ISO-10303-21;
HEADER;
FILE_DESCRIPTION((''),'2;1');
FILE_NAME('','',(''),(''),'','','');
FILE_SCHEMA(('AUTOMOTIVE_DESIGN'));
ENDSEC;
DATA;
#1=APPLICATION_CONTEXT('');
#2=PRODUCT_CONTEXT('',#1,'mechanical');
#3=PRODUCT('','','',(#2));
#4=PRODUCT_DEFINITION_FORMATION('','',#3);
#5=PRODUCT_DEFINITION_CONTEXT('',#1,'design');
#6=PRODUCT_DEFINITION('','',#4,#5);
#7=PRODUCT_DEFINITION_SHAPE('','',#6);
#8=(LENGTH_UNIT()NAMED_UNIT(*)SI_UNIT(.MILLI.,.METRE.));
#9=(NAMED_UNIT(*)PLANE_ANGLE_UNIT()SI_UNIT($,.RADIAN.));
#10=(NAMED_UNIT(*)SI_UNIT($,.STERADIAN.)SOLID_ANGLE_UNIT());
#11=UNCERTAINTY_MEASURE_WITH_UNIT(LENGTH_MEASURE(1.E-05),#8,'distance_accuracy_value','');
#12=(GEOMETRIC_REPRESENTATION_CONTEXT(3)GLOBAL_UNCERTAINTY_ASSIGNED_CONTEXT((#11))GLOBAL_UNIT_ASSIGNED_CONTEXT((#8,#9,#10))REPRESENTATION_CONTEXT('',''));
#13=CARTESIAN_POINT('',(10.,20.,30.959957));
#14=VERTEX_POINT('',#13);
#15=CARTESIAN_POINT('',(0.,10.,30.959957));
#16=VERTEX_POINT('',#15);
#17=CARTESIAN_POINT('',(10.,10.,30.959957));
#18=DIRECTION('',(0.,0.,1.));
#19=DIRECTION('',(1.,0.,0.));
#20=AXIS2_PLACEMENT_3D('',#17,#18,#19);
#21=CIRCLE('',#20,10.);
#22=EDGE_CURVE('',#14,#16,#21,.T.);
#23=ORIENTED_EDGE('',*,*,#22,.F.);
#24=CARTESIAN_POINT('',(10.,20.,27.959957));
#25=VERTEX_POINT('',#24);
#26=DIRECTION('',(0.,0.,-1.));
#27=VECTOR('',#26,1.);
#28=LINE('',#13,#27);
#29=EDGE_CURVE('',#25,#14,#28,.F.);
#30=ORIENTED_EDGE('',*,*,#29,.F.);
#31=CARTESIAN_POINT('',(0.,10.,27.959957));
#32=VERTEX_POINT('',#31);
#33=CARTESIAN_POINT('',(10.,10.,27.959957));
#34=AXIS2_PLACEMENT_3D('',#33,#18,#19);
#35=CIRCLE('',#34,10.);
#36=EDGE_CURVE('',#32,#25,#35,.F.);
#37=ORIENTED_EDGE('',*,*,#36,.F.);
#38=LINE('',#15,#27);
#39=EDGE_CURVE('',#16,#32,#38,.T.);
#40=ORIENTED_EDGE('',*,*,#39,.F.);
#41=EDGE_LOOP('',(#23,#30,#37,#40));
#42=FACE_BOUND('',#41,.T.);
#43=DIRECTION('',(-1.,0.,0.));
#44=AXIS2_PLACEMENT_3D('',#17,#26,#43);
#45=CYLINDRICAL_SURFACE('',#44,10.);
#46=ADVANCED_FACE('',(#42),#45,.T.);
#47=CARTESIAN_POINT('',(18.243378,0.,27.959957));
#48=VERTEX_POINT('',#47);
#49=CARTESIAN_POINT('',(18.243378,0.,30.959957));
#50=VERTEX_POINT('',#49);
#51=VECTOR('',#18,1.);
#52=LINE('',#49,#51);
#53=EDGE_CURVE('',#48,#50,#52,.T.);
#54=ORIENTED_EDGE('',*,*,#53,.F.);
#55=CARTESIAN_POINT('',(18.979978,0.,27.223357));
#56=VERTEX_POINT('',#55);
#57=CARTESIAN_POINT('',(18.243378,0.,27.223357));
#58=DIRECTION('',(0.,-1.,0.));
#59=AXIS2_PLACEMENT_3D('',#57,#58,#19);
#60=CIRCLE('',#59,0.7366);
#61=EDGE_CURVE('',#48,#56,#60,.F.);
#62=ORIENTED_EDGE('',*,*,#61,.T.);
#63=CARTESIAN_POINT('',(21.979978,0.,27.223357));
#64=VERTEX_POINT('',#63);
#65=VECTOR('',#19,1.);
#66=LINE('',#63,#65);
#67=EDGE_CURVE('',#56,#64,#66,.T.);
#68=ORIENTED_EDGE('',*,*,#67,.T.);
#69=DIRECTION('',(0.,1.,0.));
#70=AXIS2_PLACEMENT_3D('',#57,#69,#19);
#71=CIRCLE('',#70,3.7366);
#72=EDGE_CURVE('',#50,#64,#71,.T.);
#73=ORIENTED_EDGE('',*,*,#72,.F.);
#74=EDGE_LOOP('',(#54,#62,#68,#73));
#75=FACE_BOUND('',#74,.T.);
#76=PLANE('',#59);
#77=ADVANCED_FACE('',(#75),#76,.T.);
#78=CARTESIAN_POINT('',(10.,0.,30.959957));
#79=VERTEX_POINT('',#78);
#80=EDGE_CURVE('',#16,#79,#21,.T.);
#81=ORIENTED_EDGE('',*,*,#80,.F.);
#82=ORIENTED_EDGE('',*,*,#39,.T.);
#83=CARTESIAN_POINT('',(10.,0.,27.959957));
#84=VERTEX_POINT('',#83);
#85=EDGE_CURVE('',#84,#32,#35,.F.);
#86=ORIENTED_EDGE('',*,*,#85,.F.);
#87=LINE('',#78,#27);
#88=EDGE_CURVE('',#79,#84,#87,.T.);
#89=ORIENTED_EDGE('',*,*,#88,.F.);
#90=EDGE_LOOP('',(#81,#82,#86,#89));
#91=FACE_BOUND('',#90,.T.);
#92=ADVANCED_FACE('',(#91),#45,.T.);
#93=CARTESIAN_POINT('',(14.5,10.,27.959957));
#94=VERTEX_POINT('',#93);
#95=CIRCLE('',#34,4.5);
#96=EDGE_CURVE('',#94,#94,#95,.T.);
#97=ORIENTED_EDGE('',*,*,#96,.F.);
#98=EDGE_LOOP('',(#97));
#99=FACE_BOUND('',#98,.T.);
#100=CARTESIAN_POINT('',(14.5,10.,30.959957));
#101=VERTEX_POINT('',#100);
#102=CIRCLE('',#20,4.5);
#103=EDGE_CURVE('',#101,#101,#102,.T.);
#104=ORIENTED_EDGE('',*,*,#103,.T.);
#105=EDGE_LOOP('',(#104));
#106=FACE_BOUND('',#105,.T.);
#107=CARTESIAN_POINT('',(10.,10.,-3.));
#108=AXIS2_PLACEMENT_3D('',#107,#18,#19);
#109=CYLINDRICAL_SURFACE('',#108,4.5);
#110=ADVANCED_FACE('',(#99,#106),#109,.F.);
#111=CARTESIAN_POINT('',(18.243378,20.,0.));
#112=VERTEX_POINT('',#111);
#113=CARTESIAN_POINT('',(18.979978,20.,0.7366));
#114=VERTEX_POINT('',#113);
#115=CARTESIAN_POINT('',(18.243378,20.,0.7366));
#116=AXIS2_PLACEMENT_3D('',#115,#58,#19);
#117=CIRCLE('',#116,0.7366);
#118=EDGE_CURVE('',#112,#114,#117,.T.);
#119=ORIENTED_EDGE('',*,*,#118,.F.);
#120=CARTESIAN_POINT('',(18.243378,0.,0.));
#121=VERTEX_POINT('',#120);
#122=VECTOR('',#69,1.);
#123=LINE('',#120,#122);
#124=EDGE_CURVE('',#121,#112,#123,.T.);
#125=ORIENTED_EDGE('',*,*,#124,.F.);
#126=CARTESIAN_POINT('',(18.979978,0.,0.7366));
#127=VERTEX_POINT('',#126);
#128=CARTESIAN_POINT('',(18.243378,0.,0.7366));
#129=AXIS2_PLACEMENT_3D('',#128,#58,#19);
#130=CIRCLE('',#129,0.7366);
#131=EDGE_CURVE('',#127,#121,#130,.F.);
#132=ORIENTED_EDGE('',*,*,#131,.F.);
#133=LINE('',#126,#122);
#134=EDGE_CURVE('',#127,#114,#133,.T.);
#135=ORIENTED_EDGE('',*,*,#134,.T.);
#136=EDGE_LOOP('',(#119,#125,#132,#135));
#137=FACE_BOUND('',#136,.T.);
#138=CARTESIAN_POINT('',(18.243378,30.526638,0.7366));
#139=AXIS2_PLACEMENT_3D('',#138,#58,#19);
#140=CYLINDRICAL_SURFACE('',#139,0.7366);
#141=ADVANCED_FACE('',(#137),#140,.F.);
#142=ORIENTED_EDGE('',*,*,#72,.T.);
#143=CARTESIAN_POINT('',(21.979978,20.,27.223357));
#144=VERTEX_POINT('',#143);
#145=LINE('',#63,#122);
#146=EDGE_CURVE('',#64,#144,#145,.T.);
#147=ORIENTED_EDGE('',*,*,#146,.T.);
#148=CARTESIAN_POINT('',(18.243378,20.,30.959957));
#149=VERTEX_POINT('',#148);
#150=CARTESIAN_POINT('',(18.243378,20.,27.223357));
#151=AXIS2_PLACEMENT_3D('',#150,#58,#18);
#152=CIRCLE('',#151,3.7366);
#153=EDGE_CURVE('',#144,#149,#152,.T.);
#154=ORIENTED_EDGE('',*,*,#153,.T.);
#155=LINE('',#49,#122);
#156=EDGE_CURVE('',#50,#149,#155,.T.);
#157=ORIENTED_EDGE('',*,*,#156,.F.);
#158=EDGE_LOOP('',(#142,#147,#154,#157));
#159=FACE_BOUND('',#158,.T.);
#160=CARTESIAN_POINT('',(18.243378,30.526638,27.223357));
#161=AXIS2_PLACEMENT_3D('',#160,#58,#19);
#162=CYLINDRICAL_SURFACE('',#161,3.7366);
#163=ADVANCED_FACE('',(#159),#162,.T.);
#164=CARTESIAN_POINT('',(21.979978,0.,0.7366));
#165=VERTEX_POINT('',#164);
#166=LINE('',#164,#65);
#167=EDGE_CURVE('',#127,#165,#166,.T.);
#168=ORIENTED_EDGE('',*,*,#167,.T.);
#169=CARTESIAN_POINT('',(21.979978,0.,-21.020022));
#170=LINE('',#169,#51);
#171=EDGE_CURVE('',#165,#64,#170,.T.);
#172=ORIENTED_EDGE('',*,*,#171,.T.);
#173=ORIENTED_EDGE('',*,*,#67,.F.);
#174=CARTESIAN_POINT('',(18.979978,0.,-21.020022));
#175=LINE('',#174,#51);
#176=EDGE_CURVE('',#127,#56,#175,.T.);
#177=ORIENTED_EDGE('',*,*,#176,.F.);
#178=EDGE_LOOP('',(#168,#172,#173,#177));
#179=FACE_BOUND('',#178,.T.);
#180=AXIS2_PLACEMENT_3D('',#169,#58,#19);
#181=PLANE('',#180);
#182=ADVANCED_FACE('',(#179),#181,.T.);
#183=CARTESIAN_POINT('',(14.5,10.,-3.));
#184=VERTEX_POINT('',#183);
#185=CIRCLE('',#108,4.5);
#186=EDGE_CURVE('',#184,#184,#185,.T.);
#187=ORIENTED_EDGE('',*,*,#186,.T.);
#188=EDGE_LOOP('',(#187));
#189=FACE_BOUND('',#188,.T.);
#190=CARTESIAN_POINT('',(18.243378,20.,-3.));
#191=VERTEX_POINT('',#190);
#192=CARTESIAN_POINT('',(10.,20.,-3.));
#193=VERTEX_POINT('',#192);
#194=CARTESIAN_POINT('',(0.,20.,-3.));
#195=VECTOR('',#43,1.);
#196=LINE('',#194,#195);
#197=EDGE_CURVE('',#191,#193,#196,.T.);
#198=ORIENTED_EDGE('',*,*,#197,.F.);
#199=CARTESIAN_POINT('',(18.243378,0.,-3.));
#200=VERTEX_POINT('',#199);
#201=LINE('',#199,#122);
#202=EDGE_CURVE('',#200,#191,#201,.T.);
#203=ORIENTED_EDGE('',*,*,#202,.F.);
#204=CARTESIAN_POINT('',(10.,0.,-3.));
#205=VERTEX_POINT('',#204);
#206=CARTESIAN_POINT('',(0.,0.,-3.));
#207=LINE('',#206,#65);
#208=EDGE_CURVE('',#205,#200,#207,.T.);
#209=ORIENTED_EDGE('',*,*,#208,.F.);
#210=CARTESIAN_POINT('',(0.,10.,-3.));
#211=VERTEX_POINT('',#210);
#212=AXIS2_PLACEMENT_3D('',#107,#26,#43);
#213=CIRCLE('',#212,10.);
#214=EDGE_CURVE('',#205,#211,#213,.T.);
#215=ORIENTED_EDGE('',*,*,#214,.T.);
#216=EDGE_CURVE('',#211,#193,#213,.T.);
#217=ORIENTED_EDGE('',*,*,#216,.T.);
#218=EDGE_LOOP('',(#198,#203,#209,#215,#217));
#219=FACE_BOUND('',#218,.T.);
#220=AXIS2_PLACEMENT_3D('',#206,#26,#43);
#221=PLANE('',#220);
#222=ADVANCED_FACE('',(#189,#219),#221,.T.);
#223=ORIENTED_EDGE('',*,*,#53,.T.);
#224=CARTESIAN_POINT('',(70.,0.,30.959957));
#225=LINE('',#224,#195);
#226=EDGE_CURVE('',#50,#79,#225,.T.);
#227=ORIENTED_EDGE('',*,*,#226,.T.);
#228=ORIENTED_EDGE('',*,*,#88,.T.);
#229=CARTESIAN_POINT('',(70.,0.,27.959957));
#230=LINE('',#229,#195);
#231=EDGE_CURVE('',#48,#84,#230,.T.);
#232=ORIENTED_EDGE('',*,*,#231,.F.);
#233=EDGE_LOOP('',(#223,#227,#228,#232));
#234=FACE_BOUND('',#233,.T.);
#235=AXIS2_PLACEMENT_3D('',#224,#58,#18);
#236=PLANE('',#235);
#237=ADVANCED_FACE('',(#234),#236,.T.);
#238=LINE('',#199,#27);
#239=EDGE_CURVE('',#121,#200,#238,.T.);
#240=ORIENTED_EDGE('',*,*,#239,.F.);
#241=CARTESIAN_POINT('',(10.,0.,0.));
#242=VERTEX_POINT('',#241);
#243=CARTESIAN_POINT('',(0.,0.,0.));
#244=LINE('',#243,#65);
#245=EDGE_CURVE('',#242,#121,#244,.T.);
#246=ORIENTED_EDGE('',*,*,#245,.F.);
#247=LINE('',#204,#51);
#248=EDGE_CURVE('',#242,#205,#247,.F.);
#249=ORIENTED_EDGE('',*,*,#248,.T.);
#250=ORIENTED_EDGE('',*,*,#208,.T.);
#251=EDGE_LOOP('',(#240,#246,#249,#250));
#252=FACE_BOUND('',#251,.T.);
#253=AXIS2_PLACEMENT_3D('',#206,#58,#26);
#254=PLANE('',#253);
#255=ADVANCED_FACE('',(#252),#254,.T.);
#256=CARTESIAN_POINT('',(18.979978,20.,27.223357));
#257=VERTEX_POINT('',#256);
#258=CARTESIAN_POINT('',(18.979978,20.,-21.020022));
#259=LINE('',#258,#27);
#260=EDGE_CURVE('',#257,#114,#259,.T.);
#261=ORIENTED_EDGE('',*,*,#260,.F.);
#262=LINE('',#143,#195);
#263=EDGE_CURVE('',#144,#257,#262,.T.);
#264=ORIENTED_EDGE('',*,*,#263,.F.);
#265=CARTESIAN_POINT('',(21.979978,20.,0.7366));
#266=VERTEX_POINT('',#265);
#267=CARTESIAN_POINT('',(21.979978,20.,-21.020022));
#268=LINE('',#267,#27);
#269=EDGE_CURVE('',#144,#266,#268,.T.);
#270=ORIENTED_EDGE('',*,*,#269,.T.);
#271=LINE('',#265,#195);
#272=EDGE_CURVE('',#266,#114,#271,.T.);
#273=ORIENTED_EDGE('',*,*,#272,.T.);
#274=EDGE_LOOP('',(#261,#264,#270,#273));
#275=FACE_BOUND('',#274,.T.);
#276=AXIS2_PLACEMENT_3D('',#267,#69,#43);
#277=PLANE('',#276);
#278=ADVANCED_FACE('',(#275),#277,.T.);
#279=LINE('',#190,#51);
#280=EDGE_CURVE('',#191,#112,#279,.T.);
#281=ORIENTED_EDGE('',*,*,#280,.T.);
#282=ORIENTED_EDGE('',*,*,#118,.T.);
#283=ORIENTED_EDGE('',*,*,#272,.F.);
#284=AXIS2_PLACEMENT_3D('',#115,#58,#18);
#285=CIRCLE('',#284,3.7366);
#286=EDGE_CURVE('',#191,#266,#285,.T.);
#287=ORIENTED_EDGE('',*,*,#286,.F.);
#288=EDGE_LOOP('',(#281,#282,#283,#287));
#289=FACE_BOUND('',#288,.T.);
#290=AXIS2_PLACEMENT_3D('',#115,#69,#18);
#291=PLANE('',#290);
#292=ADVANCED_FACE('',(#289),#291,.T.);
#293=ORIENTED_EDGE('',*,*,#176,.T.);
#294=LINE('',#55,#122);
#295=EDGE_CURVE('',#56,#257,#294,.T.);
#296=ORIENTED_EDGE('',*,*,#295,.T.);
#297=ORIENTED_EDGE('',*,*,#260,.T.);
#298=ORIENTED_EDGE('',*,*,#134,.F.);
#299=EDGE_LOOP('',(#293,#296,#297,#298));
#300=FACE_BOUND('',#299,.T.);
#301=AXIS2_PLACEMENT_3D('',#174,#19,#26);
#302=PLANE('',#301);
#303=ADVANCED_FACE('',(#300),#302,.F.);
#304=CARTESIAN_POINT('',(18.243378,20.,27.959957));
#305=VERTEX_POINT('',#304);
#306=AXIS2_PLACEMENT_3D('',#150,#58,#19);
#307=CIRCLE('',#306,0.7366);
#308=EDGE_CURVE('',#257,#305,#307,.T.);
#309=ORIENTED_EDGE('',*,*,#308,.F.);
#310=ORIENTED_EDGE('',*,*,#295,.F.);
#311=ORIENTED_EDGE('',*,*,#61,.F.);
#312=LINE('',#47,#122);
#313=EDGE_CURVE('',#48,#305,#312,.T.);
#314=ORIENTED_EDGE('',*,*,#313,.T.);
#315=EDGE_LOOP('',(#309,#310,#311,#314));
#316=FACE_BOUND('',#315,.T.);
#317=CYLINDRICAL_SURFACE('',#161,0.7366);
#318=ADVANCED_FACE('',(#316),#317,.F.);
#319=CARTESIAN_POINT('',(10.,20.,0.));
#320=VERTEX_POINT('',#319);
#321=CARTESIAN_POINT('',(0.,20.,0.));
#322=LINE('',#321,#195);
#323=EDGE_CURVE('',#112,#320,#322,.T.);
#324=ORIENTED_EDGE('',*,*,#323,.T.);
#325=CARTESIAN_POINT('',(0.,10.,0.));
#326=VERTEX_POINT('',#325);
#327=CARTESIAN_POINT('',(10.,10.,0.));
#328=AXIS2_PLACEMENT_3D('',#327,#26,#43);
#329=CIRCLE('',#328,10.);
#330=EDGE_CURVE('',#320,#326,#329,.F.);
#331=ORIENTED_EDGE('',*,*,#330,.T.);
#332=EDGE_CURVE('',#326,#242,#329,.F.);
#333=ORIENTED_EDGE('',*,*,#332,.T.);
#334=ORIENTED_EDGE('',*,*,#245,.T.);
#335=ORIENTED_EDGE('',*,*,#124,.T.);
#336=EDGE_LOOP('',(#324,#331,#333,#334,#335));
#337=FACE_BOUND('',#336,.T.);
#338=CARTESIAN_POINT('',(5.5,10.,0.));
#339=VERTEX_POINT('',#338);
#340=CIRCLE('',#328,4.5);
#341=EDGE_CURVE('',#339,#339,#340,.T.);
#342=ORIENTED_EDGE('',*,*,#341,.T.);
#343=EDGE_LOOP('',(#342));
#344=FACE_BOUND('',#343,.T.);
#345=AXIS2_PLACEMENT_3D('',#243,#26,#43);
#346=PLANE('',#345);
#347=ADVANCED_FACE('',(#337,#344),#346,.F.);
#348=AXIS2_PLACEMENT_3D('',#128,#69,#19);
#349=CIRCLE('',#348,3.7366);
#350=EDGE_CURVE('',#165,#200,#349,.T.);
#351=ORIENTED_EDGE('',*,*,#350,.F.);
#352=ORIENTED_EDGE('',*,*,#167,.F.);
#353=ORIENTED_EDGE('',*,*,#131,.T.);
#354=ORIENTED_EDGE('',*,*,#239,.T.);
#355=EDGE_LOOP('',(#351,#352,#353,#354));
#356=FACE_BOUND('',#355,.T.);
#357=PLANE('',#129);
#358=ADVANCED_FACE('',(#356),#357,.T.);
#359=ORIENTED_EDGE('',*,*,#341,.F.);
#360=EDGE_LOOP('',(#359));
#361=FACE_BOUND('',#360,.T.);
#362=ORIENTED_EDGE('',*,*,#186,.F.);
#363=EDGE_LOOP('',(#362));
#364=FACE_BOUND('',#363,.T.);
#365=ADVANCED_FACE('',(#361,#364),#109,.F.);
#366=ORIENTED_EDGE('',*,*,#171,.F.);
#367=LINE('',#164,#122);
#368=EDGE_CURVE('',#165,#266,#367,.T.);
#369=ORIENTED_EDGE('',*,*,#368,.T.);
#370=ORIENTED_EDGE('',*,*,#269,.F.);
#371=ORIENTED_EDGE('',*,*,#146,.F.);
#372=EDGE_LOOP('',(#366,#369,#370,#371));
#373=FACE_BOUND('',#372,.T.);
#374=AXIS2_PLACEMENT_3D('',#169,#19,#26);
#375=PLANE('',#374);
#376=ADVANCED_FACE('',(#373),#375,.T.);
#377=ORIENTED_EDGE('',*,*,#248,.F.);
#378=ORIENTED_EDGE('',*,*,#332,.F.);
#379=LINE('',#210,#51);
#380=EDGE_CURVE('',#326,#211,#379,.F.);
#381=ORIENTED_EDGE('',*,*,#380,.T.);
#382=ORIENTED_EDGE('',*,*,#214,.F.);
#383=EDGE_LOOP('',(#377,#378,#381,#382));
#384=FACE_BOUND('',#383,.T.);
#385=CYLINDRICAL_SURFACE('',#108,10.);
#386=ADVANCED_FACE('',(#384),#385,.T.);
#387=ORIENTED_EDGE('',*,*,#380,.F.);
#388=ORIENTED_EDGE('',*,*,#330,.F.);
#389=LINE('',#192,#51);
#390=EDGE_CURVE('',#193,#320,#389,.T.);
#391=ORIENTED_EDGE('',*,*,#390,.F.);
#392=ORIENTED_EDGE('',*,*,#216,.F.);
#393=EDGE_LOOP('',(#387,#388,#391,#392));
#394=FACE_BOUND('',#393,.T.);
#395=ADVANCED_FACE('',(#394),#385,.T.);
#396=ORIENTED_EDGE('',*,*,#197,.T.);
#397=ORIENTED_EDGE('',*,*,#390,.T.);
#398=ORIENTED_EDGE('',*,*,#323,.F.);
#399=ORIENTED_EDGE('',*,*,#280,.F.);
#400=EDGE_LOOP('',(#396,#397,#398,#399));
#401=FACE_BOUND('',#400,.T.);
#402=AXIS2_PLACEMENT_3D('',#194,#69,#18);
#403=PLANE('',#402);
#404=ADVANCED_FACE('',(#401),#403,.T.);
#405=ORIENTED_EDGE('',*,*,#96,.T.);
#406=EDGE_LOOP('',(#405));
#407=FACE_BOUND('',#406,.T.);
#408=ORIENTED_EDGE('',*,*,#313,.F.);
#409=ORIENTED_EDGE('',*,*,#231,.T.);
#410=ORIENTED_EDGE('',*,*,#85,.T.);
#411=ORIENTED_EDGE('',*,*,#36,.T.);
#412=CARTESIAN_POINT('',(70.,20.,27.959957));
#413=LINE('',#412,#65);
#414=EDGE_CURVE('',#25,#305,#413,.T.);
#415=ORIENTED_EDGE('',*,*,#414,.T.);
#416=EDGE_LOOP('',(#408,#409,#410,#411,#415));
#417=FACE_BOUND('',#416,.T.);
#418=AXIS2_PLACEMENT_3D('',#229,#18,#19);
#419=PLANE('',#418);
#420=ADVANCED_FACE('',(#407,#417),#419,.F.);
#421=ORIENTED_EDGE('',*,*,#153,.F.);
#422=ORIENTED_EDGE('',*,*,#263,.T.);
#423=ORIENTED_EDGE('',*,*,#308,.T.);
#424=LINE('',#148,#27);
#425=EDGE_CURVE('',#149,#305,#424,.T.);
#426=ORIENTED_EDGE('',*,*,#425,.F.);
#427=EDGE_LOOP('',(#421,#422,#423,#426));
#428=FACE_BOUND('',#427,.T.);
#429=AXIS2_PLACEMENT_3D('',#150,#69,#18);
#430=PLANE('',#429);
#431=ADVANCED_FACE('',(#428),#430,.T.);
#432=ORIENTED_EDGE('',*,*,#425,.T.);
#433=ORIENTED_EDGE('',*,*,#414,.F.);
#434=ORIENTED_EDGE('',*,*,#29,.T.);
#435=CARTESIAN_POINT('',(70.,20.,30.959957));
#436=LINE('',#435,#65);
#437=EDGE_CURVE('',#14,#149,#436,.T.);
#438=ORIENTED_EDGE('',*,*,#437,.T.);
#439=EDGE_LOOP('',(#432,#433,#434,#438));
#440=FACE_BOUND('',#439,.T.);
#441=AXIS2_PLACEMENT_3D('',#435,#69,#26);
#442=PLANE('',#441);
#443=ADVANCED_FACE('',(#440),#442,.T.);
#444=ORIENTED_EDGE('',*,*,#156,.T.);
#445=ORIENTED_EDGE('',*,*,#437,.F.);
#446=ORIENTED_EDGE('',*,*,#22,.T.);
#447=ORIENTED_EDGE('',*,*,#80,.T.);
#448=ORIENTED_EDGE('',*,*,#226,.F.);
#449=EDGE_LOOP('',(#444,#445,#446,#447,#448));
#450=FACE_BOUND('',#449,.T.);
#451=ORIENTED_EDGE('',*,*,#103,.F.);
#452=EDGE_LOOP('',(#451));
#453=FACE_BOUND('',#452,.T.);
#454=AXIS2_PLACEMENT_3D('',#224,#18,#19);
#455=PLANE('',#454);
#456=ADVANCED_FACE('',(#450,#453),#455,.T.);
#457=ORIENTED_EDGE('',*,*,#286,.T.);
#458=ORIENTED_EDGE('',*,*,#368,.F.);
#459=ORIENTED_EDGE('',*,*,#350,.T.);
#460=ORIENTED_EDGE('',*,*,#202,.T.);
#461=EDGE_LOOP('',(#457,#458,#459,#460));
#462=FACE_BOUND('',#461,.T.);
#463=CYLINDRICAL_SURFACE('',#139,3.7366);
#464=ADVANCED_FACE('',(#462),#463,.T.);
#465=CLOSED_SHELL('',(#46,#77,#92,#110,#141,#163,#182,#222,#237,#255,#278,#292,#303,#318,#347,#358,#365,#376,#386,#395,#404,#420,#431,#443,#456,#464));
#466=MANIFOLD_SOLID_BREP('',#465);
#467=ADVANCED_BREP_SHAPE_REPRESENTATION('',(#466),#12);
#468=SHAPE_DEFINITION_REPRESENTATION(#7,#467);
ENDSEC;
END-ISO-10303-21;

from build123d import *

# Parameters (mm, degrees)
SKETCH1_W              = 70
SKETCH1_H              = 20
BASE_FLANGE1_DEPTH     = 3
SKETCHED_BEND1_DEPTH   = 20
SKETCHED_BEND1_2_DEPTH = 20
FILLET1_R              = 10
SKETCH10_R             = 4.5
CUT_EXTRUDE1_DEPTH     = 46.126468159


# Read off the part's stored shape, not the designer's step: Sketched Bend1
# Sheet-metal steps are written as plain solids
with BuildPart() as part:
    # Sketch1 → Base-Flange1 (new body)
    with BuildSketch(Plane.XY):
        with Locations((35, 10)):
            Rectangle(SKETCH1_W, SKETCH1_H)
    extrude(amount=-BASE_FLANGE1_DEPTH)

    # Sketched Bend1 outline → Sketched Bend1 (cut)
    with BuildSketch(Plane(origin=(0, 0, 0), x_dir=(1, 0, 0), z_dir=(0, 1, 0))):
        with BuildLine():
            ThreePointArc((18.243378468, 3), (20.610845469, 2.154295979), (21.906655689, 0))
            Line((21.906655689, 0), (70, 0))
            Line((70, 0), (70, 3))
            Line((70, 3), (18.243378468, 3))
        make_face()
    extrude(amount=SKETCHED_BEND1_DEPTH, mode=Mode.SUBTRACT)

    # Sketched Bend1 2 outline → Sketched Bend1 2 (add)
    with BuildSketch(Plane(origin=(0, 0, 0), x_dir=(1, 0, 0), z_dir=(0, 1, 0))):
        with BuildLine():
            Line((18.979978468, -0.7366), (18.979978468, -27.223356935))
            ThreePointArc((18.979978468, -27.223356935), (18.764233323, -27.74421179), (18.243378468, -27.959956935))
            Line((18.243378468, -27.959956935), (0, -27.959956935))
            Line((0, -27.959956935), (0, -30.959956935))
            Line((0, -30.959956935), (18.243378468, -30.959956935))
            ThreePointArc((18.243378468, -30.959956935), (20.885553666, -29.865532134), (21.979978468, -27.223356935))
            Line((21.979978468, -27.223356935), (21.979978468, -0.7366))
            ThreePointArc((21.979978468, -0.7366), (21.961602589, -0.36647982), (21.906655689, 0))
            Line((21.906655689, 0), (18.243378468, 0))
            ThreePointArc((18.243378468, 0), (18.764233323, -0.215745145), (18.979978468, -0.7366))
        make_face()
    extrude(amount=SKETCHED_BEND1_2_DEPTH)

    # Fillet1
    fillet1_edges = [part.edges().sort_by_distance(p)[0] for p in [
        (0, 0, 29.459956935),
        (0, 0, -1.5),
        (0, 20, 29.459956935),
        (0, 20, -1.5),
    ]]
    fillet(fillet1_edges, radius=FILLET1_R - 0.0001)  # a hair under: the kernel refuses the full size

    # Sketch10 → Cut-Extrude1 (cut, through all)
    with BuildSketch(Plane.XY.offset(30.959956935)):
        with Locations((10, 10)):
            Circle(SKETCH10_R)
    extrude(amount=-CUT_EXTRUDE1_DEPTH, mode=Mode.SUBTRACT)


solid = part.part
